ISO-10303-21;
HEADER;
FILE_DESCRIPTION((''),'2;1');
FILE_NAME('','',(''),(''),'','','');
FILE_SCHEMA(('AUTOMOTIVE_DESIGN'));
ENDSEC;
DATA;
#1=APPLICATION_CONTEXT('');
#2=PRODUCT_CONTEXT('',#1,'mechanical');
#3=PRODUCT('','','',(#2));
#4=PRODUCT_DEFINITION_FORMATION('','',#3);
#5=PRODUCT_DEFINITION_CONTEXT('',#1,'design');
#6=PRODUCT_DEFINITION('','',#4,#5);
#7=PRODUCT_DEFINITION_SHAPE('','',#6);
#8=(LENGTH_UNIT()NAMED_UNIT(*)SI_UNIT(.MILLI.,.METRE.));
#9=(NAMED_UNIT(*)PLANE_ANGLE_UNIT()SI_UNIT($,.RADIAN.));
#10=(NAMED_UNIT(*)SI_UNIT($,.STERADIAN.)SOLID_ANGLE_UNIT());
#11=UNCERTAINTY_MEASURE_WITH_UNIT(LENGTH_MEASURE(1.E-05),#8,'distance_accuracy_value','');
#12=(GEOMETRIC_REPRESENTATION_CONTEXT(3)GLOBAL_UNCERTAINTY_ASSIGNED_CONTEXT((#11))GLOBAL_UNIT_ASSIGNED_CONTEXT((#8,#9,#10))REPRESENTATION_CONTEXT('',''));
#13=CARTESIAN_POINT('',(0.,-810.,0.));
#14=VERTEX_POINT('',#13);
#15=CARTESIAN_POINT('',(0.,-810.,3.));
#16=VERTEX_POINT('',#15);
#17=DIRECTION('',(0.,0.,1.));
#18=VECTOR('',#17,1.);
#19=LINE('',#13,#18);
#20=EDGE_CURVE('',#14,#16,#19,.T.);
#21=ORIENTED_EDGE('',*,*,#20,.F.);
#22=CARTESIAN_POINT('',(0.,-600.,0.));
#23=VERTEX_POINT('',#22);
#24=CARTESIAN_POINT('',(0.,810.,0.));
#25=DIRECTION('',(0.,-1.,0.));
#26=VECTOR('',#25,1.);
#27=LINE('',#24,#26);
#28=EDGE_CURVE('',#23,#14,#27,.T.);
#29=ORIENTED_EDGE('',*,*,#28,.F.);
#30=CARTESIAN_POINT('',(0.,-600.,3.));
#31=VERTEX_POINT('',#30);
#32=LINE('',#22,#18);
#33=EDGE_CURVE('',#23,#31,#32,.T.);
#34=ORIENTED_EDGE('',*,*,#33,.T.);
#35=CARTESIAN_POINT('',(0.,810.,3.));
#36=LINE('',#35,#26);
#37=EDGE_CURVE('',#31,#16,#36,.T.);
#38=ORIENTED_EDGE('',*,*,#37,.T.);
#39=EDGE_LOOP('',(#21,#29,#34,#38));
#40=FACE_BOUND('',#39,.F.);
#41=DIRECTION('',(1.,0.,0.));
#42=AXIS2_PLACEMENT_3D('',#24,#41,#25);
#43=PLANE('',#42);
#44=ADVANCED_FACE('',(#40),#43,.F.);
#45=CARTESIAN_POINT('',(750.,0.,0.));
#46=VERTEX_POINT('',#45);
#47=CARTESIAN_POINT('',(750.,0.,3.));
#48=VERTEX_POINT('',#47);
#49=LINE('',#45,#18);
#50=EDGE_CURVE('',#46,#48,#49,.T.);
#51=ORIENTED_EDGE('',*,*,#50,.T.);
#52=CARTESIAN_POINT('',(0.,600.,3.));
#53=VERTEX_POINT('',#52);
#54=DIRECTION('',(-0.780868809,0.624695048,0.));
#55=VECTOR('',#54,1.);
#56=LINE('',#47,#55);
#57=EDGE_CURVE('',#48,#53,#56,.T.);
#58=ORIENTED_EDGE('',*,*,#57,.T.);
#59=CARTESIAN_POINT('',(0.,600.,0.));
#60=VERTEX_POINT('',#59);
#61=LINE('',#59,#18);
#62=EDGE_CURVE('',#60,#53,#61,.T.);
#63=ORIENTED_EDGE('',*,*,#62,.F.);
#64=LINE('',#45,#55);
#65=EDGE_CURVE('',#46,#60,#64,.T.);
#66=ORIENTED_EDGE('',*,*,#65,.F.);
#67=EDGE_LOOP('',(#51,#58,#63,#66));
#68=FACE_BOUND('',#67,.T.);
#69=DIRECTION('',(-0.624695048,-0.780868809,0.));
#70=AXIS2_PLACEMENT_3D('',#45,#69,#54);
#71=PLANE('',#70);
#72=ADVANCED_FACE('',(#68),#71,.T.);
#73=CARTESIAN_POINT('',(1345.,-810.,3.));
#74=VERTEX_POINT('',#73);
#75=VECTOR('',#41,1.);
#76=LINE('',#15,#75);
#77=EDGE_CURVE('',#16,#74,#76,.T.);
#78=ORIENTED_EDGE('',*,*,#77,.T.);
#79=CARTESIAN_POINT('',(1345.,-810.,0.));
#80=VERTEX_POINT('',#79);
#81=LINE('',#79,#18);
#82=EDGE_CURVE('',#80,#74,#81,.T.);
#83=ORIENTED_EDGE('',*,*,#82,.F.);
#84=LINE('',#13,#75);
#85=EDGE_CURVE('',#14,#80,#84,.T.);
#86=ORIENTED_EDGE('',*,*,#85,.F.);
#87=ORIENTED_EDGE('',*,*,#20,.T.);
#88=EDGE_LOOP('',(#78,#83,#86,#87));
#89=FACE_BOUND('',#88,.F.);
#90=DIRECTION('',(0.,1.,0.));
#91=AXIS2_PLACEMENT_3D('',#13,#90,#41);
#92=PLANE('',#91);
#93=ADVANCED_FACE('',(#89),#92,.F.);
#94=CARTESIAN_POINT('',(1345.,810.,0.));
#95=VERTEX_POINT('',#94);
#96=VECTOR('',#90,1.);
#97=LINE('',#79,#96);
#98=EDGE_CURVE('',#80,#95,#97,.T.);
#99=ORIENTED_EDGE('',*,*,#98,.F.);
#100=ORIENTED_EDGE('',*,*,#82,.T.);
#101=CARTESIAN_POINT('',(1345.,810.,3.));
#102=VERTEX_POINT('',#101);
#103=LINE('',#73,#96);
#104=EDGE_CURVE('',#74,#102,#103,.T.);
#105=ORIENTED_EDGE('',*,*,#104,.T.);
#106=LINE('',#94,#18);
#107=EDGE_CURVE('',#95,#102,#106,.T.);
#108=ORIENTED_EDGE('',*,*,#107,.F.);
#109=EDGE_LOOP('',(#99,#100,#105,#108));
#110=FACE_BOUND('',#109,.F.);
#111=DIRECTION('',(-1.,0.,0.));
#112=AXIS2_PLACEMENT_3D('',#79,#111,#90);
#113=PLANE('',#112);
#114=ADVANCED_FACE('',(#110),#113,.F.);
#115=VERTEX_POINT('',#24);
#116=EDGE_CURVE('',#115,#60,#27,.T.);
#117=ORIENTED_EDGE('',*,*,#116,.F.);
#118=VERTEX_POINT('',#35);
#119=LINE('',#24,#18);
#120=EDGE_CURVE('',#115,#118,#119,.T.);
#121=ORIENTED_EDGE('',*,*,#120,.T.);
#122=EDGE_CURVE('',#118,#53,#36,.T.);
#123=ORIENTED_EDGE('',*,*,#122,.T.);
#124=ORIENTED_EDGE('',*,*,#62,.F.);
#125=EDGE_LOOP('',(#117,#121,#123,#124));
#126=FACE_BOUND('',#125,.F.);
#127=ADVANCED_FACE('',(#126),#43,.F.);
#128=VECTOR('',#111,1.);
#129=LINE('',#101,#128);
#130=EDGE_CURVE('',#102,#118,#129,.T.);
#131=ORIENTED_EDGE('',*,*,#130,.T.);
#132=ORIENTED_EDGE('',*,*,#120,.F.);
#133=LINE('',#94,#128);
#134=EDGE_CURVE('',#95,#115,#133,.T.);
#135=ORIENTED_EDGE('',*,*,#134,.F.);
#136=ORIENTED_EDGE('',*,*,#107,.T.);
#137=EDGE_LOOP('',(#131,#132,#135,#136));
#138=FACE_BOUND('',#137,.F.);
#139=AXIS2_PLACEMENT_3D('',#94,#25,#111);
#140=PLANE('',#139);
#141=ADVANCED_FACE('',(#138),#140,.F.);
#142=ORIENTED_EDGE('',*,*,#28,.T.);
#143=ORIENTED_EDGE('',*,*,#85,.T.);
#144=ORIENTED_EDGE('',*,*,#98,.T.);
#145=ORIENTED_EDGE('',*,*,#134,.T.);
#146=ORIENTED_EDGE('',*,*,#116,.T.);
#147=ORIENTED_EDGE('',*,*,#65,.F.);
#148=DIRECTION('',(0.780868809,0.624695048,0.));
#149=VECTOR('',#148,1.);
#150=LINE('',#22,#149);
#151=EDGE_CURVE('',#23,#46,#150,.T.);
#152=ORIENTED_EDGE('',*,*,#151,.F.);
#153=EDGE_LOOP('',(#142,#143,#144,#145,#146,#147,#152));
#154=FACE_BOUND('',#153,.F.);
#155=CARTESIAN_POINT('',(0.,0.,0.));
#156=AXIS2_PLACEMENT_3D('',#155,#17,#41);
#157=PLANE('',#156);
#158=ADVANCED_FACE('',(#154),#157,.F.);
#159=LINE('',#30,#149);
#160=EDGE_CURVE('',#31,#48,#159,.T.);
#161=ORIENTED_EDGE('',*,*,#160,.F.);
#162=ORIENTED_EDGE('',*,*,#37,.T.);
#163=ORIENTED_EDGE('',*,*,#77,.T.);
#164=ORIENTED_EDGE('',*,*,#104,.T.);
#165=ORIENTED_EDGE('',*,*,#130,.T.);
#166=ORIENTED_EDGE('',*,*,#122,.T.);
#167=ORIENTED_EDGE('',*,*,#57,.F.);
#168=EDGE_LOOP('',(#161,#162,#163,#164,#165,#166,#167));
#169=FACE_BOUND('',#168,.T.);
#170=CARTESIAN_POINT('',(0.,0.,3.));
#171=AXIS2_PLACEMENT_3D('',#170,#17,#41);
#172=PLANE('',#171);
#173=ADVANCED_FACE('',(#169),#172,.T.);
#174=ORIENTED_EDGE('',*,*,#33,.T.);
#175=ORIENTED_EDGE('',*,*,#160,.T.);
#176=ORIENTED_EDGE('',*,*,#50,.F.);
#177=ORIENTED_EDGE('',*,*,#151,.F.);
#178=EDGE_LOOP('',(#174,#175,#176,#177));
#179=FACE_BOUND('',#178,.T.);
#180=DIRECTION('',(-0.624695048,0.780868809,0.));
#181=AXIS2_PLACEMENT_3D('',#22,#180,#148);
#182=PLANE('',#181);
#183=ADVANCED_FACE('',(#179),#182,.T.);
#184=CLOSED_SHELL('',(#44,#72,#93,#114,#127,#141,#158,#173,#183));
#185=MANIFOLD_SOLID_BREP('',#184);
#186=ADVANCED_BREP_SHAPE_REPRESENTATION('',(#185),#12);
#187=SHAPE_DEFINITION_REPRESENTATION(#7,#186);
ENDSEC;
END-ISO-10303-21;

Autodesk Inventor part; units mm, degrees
ref_plane "YZ Plane" through (0, 0, 0) normal (1, 0, 0) x (0, 1, 0)
ref_plane "XZ Plane" through (0, 0, 0) normal (0, 1, 0) x (-1, 0, 0)
ref_plane "XY Plane" through (0, 0, 0) normal (0, 0, 1) x (1, 0, 0)
sketch "Sketch1" plane through (0, 0, 0) normal (0, 0, 1) x (1, 0, 0)
  line L0 (0, -810) -> (1345, -810)
  line L1 (1345, -810) -> (1345, 810)
  line L2 (1345, 810) -> (0, 810)
  line L3 (0, 810) -> (0, -810)
  point P0 (0, 0)
  point P1 (0, 0)
  dimension "d0" = 1345
  dimension "d1" = 1620
extrude "Plate1" add sketch "Sketch1" along normal blind 3
sketch "Sketch5" plane through (0, 0, 0) normal (0, 0, -1) x (-1, 0, 0)
  line L0 (0, -810) -> (-1345, -810) construction
  line L1 (0, 810) -> (0, -810) projected
  line L2 (-1345, 810) -> (0, 810) construction
  line L3 (-1345, -810) -> (-1345, 810) construction
  line L4 (0, -600) -> (-750, 0)
  line L5 (-750, 0) -> (0, 600)
  line L6 (12.3081, -1975.0573) -> (-487.6919, -1975.0573)
  line L7 (-487.6919, -1975.0573) -> (-487.6919, -2425.2593)
  line L8 (-487.6919, -2425.2593) -> (12.3081, -1975.0573)
  point P0 (0, 0)
  point P1 (0, 0)
  dimension "d26" = 500
  dimension "d27" = 48
  dimension "d28" = 672.8164
  dimension "d29" = 750
  dimension "d30" = 1200
extrude "Cut1" cut sketch "Sketch5" against normal blind 3 contours L1 L4 L5
sketch "Sketch8" plane through (0, 0, 0) normal (0, 0, -1) x (-1, 0, 0)
  point P0 (0, 0)
sketch "Sketch9" plane through (0, 0, 0) normal (0, 0, -1) x (-1, 0, 0)
  line L0 (-1305, -785) -> (-1320, -785) construction
  line L1 (-1320, -785) -> (-1320, -585) construction
  line L2 (-1320, -585) -> (-1305, -585) construction
  line L3 (-1305, -585) -> (-1305, -785) construction
  line L4 (-1345, -810) -> (-1345, 810) projected
  line L5 (0, -810) -> (-1345, -810) projected
  point P0 (0, 0)
  dimension "d36" = 200
  dimension "d37" = 15
  dimension "d38" = 25
  dimension "d39" = 25
mark "Mark1"
equation "\"d31\" = Thickness"
equation "\"d2\" = Thickness"
equation "\"BendReliefWidth\" = Thickness"
equation "\"BendReliefDepth\" = 0.5 * Thickness"
equation "\"CornerReliefSize\" = 4 * Thickness"
equation "\"MinimumRemnant\" = 2 * Thickness"
equation "\"TransitionRadius\" = BendRadius"
equation "\"JacobiRadiusSize\" = BendRadius"
equation "\"GapSize\" = Thickness"
equation "\"Thickness\" = 3"
equation "\"BendRadius\" = 5"
properties part number "BSH 014 board cone" material "09g2s"
